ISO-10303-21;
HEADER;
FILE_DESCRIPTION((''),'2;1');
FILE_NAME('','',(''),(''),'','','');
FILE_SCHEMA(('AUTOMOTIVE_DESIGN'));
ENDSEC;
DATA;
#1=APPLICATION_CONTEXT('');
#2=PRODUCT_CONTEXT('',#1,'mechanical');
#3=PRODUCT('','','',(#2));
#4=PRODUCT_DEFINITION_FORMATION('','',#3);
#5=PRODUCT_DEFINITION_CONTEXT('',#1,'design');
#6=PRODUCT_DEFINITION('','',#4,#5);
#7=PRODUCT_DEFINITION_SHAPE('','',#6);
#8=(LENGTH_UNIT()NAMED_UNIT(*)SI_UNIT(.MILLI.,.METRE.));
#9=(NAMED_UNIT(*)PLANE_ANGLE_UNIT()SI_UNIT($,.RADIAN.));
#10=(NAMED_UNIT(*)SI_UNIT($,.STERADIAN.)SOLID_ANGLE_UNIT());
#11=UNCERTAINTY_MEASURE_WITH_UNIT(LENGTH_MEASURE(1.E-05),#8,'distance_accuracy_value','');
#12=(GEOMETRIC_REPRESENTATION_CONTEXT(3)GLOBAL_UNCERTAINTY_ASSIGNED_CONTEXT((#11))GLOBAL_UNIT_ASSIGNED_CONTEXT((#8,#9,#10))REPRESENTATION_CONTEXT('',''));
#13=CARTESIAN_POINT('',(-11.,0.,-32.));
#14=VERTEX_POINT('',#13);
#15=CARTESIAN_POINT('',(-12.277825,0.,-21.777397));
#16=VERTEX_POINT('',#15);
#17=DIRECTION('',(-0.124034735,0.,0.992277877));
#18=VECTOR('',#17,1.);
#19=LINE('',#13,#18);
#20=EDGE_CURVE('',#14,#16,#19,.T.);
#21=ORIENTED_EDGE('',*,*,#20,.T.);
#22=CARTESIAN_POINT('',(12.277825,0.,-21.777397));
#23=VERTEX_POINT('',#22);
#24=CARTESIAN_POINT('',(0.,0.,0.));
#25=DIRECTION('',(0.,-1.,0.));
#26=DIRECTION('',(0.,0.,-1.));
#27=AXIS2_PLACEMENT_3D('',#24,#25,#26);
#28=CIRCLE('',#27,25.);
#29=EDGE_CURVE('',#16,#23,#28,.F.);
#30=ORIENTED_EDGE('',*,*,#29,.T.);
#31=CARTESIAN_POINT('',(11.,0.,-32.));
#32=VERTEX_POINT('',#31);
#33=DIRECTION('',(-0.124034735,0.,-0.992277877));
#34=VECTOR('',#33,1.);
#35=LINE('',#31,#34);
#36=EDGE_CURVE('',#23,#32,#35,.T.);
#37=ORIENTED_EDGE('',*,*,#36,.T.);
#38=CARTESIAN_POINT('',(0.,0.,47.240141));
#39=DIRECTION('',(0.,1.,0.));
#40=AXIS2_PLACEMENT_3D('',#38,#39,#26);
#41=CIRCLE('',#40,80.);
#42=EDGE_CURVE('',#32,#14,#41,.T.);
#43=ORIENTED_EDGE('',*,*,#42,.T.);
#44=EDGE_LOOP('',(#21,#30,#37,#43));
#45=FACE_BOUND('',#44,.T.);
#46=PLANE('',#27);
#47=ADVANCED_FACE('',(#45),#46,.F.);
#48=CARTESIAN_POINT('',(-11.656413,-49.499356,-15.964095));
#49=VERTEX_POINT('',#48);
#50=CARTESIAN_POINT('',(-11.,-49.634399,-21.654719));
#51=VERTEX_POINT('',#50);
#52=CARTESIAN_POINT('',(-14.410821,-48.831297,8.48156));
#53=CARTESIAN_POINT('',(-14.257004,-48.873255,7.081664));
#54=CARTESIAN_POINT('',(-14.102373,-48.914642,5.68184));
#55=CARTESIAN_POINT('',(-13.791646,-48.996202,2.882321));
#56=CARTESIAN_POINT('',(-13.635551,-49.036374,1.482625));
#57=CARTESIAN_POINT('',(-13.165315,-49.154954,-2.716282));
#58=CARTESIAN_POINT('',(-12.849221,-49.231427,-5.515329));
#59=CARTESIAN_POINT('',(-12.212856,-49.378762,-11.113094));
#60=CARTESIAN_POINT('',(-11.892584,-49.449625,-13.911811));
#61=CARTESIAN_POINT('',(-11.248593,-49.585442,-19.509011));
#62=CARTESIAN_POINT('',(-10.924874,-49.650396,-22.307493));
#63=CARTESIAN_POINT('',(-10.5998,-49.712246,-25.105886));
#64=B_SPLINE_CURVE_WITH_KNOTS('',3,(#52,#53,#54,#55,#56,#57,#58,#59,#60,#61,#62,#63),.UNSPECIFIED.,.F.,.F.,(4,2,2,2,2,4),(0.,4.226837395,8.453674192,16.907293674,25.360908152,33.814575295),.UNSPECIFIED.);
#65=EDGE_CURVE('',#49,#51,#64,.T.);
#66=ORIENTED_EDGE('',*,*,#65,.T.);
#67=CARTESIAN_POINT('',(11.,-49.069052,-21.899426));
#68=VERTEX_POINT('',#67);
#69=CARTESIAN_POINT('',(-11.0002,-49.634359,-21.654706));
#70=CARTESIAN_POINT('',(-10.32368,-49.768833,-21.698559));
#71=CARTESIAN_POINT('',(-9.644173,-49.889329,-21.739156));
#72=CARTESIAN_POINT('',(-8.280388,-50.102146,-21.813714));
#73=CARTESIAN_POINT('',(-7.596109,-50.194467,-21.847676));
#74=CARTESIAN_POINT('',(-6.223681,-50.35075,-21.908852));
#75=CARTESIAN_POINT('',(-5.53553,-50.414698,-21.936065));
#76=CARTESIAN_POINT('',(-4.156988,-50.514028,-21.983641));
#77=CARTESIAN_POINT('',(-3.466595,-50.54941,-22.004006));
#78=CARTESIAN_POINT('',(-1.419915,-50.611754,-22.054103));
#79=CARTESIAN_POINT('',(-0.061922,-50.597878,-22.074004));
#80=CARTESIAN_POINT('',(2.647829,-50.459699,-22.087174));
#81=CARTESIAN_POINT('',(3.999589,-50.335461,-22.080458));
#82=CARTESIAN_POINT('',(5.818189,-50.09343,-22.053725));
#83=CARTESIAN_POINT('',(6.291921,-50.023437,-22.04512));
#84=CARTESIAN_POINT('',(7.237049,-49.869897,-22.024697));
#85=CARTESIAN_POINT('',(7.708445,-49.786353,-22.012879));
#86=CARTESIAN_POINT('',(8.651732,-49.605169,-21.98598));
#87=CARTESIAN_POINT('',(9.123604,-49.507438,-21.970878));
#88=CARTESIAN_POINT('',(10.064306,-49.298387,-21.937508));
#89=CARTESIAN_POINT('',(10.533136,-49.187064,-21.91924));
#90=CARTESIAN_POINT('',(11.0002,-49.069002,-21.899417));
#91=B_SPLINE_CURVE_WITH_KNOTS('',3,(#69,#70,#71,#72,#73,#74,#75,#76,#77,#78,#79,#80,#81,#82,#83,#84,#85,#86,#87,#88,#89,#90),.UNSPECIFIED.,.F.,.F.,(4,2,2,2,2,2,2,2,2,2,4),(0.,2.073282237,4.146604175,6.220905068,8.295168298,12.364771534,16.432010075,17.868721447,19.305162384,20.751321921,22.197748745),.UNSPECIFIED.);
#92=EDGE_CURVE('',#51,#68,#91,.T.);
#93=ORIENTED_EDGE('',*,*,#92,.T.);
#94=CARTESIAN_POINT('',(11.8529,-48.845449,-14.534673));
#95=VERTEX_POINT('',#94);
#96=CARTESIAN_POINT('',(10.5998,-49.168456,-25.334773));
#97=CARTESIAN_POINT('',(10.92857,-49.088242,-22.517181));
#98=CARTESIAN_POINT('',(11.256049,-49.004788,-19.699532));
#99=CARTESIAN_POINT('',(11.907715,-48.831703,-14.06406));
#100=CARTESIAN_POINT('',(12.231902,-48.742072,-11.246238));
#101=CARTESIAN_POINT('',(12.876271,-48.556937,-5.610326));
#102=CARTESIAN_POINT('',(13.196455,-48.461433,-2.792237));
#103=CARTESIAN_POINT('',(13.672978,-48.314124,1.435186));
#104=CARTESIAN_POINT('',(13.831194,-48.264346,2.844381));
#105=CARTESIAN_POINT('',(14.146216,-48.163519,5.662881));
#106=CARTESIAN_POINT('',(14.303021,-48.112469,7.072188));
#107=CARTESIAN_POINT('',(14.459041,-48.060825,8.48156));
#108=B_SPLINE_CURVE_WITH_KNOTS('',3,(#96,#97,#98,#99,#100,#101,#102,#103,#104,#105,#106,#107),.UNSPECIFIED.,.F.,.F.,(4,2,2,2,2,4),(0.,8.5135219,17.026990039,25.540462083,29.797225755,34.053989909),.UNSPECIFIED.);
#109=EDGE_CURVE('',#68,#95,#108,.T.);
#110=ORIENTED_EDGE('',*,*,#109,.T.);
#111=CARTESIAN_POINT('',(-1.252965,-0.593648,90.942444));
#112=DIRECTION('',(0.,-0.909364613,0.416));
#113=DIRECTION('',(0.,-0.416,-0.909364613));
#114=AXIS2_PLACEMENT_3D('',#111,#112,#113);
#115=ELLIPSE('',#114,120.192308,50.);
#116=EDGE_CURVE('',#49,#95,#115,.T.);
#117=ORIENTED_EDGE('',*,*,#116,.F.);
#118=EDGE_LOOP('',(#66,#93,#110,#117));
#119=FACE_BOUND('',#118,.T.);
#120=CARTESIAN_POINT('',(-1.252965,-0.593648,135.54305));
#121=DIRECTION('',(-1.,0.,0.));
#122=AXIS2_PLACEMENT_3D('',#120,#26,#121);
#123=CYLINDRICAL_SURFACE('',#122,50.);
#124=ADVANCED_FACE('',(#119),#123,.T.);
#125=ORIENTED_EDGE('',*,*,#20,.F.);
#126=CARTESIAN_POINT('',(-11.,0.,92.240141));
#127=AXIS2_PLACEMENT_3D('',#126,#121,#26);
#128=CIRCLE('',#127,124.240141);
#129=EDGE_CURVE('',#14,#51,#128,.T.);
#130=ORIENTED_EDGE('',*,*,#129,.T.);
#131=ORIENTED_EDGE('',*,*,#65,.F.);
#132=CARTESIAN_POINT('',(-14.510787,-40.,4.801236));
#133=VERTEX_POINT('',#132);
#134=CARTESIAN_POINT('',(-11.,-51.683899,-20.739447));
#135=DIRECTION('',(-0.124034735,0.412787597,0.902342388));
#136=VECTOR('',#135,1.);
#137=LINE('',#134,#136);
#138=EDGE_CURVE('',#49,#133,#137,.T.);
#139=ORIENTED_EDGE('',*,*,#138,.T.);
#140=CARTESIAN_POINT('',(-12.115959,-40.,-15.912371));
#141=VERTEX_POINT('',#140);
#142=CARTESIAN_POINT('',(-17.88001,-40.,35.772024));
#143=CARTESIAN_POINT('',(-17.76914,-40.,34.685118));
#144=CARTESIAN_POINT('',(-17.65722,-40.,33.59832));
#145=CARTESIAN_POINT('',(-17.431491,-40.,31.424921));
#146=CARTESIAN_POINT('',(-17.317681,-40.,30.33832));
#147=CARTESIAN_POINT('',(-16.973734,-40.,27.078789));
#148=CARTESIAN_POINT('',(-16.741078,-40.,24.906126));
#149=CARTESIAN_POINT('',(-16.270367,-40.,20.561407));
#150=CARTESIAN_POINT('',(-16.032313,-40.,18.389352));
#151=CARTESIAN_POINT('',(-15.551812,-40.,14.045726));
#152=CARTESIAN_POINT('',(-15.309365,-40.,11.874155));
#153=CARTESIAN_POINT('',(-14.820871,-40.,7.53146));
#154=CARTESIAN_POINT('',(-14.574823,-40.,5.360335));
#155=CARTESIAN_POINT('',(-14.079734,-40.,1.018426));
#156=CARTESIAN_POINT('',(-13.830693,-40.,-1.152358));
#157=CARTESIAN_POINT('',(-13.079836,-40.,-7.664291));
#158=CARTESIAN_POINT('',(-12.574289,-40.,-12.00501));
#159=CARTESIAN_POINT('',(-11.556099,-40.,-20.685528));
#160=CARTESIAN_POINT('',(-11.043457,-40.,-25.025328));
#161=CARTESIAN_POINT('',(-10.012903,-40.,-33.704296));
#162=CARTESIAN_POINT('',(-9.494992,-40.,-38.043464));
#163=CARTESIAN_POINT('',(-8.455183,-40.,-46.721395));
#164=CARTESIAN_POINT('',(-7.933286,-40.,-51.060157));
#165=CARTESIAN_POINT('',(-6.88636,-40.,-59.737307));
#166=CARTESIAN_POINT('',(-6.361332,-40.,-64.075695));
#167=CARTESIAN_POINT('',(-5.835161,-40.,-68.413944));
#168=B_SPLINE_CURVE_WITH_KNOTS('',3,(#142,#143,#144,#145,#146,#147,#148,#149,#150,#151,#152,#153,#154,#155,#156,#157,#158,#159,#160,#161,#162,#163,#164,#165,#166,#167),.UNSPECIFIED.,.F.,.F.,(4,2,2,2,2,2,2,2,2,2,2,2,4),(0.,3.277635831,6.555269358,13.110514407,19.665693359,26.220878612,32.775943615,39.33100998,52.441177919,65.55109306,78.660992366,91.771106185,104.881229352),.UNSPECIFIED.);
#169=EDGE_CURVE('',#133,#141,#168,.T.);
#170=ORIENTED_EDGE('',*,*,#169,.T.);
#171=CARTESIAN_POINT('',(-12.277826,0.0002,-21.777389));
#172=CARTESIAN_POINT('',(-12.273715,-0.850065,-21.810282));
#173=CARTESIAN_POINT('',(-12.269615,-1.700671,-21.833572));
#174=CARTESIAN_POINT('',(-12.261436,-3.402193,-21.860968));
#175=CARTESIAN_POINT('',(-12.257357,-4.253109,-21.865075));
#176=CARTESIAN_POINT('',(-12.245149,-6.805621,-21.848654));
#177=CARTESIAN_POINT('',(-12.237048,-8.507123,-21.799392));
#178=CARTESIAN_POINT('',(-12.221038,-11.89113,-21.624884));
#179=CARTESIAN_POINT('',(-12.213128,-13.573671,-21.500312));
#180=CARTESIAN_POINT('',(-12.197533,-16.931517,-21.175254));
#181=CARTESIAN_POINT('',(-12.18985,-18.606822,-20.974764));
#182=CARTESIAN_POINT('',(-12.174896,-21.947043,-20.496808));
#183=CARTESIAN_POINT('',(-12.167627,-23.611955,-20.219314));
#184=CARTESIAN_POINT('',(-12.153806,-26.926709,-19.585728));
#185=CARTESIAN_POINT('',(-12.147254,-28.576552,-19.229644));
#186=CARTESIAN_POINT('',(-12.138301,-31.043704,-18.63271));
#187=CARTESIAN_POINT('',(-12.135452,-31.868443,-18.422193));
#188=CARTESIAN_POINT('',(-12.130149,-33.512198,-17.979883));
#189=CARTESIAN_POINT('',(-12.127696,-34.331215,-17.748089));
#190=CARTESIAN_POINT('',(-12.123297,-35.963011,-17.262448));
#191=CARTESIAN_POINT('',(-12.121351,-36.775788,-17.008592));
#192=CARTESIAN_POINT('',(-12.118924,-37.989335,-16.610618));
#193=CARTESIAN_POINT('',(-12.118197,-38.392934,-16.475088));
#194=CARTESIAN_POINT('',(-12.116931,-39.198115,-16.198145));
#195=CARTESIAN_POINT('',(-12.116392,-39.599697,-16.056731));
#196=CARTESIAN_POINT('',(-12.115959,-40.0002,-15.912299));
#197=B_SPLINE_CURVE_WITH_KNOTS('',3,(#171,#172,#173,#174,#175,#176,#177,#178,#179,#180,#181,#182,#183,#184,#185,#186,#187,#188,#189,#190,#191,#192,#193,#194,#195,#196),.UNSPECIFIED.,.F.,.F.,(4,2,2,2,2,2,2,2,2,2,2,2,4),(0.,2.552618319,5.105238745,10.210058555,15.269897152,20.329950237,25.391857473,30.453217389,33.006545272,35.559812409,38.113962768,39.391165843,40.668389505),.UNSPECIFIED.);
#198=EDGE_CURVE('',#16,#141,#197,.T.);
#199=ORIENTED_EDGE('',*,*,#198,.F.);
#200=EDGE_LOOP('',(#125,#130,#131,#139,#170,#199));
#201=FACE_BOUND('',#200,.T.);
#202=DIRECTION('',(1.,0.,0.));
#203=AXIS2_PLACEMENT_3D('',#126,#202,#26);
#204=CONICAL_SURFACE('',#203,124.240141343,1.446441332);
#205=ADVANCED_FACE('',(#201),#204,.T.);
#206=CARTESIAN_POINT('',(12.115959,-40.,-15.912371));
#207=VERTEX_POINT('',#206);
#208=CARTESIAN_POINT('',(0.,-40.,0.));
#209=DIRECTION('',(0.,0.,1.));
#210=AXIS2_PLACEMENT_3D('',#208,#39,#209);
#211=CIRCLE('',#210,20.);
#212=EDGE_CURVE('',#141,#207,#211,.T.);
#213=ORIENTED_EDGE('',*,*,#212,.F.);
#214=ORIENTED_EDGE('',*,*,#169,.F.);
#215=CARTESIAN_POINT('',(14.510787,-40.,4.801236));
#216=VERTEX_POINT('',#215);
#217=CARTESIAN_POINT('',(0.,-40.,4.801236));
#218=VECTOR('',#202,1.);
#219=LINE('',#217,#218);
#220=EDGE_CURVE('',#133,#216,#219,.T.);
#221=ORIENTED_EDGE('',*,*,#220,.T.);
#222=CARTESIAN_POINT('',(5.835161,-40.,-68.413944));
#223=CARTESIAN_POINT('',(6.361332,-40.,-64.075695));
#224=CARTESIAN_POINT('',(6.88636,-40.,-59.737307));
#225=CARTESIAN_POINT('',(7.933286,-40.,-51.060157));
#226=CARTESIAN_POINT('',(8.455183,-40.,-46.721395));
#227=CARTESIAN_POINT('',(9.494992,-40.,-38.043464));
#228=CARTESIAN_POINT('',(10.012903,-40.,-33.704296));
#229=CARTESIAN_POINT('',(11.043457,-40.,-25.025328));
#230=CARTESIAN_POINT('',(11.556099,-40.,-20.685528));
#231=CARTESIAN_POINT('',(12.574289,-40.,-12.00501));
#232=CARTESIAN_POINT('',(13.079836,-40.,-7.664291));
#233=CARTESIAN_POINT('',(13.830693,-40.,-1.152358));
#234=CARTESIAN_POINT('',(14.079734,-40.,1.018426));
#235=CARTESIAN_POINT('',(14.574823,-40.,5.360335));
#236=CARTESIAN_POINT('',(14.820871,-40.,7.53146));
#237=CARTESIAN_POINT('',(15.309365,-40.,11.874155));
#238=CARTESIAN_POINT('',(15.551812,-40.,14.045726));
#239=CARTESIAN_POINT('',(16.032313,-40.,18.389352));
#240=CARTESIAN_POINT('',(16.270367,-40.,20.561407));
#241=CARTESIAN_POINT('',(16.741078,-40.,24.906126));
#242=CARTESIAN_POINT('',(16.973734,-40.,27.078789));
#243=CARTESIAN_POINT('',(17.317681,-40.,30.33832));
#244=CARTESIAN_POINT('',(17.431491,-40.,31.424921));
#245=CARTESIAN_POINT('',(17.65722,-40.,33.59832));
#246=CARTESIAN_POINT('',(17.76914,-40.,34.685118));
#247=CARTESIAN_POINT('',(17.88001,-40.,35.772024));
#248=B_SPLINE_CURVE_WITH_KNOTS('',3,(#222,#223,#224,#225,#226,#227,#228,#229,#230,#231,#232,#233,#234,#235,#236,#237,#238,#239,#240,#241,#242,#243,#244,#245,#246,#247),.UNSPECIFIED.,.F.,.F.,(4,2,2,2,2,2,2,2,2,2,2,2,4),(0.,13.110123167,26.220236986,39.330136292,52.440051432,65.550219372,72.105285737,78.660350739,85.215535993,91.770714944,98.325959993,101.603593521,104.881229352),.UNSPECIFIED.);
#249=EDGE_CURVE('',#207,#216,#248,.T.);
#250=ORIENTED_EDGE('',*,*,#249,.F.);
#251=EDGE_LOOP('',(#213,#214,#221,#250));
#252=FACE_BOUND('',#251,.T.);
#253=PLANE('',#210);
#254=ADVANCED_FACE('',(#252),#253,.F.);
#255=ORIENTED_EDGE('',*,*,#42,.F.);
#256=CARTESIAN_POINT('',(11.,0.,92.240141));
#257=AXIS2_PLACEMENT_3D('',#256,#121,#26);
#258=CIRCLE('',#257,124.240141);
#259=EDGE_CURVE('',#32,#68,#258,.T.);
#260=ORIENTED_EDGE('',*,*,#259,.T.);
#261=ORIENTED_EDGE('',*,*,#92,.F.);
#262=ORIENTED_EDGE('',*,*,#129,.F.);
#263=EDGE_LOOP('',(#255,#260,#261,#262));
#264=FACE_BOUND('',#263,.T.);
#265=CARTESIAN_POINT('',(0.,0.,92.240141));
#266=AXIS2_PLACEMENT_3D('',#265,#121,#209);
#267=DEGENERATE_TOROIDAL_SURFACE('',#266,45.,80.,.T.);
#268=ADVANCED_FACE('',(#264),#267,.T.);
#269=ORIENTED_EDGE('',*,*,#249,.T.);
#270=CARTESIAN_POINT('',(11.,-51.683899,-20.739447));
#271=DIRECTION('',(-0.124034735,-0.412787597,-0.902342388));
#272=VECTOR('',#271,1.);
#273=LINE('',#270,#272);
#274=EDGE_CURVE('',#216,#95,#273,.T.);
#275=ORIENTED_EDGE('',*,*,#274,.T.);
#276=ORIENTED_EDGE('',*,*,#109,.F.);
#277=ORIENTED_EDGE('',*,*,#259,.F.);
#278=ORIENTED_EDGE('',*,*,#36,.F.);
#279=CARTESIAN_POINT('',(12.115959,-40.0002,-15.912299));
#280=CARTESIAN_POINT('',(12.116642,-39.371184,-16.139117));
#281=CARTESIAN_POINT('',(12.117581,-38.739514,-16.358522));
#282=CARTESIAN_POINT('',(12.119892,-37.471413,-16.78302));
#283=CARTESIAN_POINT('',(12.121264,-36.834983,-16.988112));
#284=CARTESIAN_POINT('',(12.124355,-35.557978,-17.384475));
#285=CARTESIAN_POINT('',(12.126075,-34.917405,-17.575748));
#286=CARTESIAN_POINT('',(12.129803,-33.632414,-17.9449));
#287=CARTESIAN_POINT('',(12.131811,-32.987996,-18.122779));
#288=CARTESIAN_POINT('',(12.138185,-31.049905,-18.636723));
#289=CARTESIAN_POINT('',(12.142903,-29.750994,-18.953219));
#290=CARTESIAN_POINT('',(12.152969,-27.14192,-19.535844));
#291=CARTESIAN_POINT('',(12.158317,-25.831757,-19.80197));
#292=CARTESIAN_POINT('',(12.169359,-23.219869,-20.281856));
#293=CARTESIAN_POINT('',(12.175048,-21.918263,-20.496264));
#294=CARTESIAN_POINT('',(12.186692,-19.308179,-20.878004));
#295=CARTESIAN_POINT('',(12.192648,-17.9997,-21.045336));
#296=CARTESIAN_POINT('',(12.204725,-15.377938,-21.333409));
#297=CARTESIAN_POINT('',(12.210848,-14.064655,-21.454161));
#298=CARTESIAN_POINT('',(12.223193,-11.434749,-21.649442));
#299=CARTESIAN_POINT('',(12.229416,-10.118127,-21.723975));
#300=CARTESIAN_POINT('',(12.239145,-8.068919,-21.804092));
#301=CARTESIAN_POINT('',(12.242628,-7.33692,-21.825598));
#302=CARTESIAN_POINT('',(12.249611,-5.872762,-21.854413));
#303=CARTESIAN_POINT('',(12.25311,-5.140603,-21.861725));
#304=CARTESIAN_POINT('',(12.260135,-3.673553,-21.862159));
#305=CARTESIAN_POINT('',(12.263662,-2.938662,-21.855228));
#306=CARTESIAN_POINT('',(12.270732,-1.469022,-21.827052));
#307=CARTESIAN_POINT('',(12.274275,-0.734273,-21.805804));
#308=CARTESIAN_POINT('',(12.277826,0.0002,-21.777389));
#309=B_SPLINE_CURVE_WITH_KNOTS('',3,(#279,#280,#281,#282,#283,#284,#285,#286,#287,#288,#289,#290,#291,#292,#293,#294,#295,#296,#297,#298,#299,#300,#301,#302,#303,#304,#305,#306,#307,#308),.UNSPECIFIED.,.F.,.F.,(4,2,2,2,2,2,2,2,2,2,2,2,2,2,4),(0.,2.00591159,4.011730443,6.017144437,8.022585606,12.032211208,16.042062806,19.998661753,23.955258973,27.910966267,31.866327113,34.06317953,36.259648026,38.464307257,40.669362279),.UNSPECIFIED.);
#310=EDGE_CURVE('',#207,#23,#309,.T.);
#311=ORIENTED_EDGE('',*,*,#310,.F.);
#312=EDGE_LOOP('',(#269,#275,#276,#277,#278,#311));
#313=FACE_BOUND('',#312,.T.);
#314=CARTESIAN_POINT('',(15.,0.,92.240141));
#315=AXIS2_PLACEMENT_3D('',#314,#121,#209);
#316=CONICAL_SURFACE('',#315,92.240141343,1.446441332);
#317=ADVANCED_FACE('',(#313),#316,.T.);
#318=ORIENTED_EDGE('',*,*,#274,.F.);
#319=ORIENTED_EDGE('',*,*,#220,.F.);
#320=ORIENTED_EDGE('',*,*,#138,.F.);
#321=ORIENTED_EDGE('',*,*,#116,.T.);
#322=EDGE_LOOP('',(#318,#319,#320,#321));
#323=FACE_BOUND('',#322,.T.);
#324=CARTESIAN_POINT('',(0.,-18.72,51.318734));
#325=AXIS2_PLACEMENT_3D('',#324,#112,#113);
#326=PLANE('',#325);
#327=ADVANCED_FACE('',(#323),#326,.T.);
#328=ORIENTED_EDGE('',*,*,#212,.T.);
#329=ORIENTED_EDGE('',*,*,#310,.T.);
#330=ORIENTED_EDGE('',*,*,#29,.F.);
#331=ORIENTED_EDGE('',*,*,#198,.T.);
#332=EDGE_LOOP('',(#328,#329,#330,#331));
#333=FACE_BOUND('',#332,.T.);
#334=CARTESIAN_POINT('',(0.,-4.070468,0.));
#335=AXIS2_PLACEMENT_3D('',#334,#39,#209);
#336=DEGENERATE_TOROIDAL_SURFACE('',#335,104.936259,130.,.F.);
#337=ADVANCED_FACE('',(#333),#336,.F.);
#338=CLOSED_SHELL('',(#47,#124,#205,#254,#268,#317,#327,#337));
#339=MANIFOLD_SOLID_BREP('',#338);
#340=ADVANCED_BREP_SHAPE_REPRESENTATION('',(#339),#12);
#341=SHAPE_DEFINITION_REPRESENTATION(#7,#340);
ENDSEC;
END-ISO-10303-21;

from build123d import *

# Parameters (mm, degrees)
CUT_EXTRUDE_1_DEPTH      = 67.373183556
CUT_EXTRUDE_1_DEPTH_BACK = 67.373183556


# Read off the part's stored shape, not the designer's step: Поверхность-Сшить1
with BuildPart() as part:
    # Knit 1 outline → Knit 1 (revolve)
    with BuildSketch(Plane.XY):
        with BuildLine():
            Line((0, 0), (0, -40))
            Line((0, -40), (20, -40))
            ThreePointArc((20, -40), (24.059865396, -20.194983175), (25, 0))
            Line((25, 0), (0, 0))
        make_face()
    revolve(axis=Axis((0, 0, 0), (0, 1, 0)))

    # По траектории1: sweep along a path in Эскиз3
    with BuildLine(Plane(origin=(0, 0, 0), x_dir=(0, 0, -1), z_dir=(1, 0, 0))) as sweep_1_path:
        ThreePointArc((32.759858657, 0), (29.894665497, -26.609940967), (21.430435325, -52))
    # Эскиз2 → По траектории1 (sweep)
    with BuildSketch(Plane(origin=(0, 0, 0), x_dir=(1, 0, 0), z_dir=(0, 1, 0))):
        with BuildLine():
            Line((-15, 0), (15, 0))
            Line((15, 0), (11, 32))
            ThreePointArc((11, 32), (0, 32.759858657), (-11, 32))
            Line((-11, 32), (-15, 0))
        make_face()
    sweep(path=sweep_1_path.line)

    # Эскиз4 → Вырез-Вытянуть1 (cut, two sides: drawn at the far end of the back side and taken through both)
    with BuildSketch(Plane.XY.offset(-CUT_EXTRUDE_1_DEPTH_BACK)):
        with BuildLine():
            Line((145.597430233, 60.060046505), (31.407892686, -38.452179183))
            ThreePointArc((31.407892686, -38.452179183), (-1.252964611, -50.593647771), (-33.913821908, -38.452179183))
            Line((-33.913821908, -38.452179183), (-148.103359455, 60.060046505))
            Line((-148.103359455, 60.060046505), (-148.103359455, -241.561631066))
            Line((-148.103359455, -241.561631066), (145.597430233, -241.561631066))
            Line((145.597430233, -241.561631066), (145.597430233, 60.060046505))
        make_face()
    extrude(amount=CUT_EXTRUDE_1_DEPTH + CUT_EXTRUDE_1_DEPTH_BACK, mode=Mode.SUBTRACT)


solid = part.part
